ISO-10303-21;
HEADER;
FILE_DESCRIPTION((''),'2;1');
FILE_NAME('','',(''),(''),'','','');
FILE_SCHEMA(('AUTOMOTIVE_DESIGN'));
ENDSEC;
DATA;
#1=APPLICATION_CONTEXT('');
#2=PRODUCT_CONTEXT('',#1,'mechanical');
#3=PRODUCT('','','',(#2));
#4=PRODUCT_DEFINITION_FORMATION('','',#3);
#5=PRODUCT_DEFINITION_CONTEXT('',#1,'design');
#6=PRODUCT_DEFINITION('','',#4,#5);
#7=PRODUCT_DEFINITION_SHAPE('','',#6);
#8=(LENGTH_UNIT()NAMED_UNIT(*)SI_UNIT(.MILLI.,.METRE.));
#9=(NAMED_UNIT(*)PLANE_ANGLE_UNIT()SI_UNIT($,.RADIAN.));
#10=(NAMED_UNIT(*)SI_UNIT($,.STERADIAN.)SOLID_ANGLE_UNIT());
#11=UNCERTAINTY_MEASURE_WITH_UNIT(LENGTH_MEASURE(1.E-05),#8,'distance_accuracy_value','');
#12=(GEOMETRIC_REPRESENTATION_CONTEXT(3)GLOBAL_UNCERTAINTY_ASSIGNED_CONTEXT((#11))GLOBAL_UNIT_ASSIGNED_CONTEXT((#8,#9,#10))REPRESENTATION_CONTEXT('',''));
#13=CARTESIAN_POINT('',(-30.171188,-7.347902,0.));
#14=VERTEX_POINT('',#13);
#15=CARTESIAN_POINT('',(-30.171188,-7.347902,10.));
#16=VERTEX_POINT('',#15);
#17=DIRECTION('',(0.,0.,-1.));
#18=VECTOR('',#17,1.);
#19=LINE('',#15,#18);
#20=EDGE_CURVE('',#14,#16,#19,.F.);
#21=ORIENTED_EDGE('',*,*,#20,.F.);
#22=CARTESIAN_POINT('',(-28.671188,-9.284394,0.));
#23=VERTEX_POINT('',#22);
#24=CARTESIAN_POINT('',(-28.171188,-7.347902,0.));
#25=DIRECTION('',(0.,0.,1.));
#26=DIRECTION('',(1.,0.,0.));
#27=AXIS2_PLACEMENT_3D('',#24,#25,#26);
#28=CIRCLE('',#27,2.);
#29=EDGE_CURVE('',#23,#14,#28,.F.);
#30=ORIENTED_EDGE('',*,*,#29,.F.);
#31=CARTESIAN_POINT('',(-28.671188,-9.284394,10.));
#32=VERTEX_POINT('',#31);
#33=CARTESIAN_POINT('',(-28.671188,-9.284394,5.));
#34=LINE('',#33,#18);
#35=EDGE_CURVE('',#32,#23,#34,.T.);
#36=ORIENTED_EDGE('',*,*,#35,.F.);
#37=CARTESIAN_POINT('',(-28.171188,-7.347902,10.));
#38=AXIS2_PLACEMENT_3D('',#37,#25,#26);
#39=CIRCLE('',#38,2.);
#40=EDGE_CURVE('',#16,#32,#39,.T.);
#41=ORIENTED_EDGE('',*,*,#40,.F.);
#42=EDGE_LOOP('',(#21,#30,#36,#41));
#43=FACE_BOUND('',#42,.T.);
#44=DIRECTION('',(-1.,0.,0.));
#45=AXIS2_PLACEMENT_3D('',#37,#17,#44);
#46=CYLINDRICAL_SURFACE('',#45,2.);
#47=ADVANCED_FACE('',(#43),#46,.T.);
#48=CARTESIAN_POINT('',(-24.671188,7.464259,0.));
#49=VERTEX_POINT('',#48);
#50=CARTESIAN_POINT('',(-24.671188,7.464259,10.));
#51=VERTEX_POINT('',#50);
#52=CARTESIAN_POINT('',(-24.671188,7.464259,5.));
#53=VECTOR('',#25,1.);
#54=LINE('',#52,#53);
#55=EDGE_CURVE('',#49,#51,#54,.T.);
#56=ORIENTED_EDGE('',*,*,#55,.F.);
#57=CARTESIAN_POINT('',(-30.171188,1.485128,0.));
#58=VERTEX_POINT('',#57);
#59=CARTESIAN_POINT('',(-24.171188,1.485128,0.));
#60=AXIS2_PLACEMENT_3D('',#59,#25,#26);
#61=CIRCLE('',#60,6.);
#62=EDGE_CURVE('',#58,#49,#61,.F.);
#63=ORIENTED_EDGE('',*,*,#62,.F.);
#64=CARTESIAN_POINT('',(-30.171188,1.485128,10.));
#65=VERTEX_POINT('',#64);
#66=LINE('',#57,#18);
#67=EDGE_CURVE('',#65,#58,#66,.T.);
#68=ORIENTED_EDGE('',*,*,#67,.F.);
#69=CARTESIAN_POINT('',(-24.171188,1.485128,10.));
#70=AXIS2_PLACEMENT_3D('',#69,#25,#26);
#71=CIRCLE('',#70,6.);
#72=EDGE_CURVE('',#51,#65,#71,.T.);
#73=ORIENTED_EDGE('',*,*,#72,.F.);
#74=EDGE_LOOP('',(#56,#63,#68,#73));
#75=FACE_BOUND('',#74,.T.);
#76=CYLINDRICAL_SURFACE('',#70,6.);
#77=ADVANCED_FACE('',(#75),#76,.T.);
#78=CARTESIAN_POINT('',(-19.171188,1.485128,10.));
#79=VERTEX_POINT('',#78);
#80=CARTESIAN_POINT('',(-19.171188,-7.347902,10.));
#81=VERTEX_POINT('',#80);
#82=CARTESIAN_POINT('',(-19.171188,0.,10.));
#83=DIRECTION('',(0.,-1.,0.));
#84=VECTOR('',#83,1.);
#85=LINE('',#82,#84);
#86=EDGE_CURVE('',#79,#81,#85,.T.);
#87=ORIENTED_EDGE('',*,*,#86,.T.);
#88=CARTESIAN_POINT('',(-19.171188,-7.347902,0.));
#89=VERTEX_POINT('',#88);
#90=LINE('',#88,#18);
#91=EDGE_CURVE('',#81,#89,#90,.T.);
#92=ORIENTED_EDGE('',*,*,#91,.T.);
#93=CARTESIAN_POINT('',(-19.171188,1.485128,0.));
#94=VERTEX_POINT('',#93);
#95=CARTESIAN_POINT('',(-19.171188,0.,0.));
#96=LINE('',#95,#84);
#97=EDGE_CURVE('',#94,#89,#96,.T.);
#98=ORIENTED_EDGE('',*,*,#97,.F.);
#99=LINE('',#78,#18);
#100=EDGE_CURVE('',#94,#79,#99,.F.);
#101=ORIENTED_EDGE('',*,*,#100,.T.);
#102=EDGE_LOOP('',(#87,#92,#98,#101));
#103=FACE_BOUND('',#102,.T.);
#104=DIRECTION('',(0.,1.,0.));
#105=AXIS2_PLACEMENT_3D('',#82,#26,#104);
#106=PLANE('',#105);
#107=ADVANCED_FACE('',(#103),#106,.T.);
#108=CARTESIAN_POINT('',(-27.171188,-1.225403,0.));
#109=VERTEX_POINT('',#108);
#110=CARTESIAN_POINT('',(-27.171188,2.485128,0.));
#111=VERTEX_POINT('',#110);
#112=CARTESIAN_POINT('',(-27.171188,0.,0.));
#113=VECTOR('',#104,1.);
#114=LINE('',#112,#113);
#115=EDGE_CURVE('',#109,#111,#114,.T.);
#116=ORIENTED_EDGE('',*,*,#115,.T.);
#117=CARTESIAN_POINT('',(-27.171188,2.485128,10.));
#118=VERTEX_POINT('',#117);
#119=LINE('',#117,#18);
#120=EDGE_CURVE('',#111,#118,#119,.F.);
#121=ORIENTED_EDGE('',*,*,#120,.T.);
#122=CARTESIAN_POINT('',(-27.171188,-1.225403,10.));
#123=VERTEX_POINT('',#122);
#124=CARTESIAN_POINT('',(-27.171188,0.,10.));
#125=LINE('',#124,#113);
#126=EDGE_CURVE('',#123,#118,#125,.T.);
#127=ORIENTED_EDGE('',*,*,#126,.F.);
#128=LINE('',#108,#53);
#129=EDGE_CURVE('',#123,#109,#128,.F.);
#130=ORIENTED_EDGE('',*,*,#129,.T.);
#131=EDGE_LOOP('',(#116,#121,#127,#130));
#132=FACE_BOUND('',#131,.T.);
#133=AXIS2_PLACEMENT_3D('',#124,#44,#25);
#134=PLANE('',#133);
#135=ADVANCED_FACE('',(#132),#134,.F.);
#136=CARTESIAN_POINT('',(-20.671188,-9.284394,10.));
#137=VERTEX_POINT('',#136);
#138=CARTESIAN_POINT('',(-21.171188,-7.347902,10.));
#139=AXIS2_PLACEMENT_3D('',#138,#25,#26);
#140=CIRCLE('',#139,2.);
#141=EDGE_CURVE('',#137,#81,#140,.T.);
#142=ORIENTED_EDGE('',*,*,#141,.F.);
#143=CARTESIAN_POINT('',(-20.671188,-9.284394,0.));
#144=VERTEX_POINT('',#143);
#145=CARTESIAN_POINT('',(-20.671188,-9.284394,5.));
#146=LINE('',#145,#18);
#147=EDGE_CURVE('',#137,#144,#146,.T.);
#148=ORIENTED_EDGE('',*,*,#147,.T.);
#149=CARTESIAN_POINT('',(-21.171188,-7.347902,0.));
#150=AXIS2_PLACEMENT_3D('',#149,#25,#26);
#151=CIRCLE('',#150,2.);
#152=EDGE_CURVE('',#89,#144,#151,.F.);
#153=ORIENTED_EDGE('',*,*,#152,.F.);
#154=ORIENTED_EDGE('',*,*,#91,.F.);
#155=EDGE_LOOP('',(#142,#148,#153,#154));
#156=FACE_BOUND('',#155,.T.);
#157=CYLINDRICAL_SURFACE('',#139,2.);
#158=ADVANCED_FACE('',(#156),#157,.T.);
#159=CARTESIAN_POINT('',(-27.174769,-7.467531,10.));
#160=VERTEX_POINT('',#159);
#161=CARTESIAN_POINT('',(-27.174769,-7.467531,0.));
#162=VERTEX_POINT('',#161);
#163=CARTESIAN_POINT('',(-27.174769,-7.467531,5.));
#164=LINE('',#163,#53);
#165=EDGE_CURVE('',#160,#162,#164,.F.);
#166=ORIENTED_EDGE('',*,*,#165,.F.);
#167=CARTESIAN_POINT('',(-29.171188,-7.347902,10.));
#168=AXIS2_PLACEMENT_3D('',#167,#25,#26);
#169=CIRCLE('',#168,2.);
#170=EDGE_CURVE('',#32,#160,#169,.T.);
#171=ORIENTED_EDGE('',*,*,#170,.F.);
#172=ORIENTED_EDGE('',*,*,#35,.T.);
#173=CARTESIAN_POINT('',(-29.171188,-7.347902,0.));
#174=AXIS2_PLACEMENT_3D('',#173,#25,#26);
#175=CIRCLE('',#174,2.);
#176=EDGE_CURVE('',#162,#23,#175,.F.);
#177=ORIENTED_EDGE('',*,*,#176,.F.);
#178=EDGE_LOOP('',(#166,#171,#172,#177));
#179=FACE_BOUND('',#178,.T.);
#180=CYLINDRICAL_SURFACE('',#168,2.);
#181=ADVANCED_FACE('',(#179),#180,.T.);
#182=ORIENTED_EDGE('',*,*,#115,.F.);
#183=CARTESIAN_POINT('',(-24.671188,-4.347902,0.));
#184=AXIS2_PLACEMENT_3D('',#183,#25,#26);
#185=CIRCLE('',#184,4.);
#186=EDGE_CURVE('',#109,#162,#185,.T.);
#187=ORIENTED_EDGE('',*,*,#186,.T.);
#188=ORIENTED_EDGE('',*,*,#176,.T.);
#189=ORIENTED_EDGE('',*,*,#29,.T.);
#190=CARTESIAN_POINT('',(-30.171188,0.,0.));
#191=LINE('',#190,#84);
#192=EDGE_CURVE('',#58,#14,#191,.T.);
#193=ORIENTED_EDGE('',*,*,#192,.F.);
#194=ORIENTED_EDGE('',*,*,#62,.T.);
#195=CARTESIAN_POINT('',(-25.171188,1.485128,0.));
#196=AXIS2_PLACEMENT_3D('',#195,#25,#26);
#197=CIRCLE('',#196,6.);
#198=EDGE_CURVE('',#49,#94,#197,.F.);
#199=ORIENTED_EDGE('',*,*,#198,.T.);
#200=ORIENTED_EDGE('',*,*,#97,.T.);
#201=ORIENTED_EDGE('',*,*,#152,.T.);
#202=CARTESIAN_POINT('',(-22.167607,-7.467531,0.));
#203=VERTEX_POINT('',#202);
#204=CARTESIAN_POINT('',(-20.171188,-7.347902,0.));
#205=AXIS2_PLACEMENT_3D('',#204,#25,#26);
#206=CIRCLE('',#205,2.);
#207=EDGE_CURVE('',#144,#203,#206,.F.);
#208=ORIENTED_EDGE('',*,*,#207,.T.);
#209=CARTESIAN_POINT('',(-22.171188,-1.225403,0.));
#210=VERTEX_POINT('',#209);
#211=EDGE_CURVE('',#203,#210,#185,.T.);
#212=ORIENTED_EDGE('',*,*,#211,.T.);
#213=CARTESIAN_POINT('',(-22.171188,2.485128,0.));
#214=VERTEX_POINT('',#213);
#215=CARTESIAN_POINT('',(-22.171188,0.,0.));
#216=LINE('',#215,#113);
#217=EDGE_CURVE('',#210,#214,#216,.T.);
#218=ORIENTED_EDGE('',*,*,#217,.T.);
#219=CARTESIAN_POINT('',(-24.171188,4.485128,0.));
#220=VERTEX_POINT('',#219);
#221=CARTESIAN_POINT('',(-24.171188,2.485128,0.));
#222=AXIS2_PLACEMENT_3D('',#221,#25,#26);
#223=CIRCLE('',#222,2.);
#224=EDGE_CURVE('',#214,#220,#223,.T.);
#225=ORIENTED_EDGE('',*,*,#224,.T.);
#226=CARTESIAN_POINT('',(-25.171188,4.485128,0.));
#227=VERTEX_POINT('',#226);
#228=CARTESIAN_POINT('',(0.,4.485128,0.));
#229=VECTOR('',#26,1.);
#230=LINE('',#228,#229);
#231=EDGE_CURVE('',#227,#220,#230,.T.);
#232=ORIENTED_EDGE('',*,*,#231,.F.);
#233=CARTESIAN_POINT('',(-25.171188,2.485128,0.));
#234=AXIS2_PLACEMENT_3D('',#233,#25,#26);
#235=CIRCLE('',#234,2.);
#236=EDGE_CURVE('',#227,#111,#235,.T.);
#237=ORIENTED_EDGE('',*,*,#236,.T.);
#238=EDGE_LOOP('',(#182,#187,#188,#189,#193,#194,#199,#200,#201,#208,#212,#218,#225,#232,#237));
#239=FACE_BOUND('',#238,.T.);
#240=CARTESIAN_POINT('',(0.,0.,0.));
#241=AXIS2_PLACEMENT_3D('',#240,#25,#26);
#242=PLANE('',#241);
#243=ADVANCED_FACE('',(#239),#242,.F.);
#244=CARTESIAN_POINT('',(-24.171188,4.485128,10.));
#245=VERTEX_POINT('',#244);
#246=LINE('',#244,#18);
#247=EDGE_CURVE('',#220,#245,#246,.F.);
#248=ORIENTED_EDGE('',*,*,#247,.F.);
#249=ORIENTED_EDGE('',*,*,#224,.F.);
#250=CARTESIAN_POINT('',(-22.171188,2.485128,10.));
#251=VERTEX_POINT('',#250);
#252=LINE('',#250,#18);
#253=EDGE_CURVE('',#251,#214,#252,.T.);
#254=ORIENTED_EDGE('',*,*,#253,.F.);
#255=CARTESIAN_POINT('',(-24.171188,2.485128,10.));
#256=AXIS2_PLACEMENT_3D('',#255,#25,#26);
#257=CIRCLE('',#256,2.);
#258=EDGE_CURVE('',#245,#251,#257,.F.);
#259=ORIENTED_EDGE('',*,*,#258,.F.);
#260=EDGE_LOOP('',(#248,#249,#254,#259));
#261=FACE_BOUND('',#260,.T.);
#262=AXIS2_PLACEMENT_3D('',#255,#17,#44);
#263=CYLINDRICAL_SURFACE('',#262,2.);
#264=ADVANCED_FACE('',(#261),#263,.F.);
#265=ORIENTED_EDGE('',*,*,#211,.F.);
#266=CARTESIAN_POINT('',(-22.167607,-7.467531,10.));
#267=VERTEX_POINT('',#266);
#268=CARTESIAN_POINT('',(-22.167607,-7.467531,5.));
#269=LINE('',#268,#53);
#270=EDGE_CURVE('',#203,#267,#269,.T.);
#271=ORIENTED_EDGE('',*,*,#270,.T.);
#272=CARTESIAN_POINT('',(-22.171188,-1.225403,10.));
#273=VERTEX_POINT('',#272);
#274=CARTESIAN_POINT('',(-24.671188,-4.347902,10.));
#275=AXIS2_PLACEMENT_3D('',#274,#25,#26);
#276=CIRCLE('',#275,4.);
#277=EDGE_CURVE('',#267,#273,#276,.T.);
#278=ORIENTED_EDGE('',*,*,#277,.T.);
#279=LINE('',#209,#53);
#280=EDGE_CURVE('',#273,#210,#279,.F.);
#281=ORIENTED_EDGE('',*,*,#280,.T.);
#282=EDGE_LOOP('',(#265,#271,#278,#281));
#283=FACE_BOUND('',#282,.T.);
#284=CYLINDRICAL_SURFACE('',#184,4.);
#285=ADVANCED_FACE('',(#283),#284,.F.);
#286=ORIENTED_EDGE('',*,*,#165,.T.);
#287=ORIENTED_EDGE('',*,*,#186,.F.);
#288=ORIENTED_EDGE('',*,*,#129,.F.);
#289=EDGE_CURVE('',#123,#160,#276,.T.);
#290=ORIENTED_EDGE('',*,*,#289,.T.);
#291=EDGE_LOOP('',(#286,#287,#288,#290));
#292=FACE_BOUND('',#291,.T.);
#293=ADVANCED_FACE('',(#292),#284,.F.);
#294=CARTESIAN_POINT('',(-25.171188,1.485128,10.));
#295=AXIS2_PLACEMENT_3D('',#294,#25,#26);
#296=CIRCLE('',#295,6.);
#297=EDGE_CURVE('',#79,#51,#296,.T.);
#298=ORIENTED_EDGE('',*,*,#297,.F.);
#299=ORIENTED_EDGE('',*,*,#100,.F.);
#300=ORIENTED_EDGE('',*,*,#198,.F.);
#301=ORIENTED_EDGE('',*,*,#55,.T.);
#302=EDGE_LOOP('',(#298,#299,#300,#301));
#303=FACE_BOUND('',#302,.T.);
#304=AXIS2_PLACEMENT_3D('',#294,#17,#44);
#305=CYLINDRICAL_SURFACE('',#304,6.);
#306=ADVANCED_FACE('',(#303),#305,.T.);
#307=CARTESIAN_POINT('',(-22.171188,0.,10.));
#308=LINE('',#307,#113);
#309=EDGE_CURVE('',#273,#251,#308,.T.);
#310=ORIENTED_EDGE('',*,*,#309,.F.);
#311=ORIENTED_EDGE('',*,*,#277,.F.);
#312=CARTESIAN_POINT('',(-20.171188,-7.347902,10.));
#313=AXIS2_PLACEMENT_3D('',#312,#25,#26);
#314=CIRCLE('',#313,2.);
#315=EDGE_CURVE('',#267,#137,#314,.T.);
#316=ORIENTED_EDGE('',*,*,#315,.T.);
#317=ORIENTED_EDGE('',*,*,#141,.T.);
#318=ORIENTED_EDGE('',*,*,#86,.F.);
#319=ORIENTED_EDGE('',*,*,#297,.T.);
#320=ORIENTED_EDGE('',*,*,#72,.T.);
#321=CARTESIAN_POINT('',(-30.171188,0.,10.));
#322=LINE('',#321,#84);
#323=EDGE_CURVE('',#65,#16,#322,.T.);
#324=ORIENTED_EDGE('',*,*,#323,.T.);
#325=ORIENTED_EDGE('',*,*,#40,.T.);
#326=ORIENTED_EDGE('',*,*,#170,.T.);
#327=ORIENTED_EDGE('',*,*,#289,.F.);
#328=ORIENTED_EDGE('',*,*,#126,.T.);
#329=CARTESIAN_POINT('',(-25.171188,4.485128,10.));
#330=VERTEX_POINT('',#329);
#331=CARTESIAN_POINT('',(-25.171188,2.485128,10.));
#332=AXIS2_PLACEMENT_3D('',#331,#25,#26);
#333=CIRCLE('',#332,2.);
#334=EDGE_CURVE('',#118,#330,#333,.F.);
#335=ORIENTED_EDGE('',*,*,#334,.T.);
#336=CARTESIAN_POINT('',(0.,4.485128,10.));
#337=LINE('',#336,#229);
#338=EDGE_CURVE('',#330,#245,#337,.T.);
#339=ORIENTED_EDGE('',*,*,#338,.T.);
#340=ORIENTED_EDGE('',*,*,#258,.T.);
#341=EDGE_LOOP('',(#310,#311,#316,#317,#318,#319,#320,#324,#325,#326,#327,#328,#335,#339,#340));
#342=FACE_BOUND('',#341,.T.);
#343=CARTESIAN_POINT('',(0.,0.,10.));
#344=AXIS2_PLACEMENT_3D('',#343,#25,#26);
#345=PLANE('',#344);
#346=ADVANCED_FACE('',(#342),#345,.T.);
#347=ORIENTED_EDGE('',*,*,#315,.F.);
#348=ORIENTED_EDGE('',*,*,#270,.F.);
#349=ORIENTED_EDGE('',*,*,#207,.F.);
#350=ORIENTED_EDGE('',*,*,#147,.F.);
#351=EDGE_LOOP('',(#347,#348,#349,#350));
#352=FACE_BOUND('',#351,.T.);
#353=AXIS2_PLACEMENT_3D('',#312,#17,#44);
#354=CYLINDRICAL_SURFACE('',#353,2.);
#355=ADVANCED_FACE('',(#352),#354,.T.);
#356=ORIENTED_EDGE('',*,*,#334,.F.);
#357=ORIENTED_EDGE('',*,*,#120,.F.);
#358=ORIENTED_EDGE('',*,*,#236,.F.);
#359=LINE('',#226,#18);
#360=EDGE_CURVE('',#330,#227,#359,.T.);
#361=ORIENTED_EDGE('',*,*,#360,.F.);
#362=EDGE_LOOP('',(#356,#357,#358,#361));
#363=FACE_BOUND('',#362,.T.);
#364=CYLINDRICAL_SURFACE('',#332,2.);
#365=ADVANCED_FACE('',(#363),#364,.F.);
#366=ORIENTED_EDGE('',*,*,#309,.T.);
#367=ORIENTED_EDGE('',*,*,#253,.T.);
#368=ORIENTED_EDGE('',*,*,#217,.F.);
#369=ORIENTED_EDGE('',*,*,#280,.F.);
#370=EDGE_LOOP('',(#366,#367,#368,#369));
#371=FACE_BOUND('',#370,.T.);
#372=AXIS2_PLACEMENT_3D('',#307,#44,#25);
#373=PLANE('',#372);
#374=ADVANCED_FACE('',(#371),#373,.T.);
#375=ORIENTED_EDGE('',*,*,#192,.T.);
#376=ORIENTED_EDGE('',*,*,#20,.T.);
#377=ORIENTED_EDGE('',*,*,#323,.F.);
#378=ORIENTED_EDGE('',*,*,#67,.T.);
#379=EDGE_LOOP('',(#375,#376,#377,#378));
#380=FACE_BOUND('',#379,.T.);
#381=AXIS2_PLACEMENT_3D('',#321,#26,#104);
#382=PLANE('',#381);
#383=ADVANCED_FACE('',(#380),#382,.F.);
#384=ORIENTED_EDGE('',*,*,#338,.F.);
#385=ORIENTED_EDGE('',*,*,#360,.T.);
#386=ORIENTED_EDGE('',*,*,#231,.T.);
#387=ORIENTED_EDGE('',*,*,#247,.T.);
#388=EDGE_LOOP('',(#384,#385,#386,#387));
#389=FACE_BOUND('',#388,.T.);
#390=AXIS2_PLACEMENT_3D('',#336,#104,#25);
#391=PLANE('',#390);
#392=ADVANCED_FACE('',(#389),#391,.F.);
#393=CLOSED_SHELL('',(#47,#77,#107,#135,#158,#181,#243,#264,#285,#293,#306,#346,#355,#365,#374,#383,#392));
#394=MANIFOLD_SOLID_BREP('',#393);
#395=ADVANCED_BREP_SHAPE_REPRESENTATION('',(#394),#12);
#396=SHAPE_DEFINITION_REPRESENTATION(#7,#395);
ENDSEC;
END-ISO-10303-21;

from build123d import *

# Parameters (mm, degrees)
BOSS_EXTRUDE1_DEPTH = 10
FILLET1_R           = 6
FILLET2_R           = 2
FILLET3_R           = 2
SKETCH2_R           = 4
CUT_EXTRUDE1_DEPTH  = 34.113449774


with BuildPart() as part:
    # Sketch1 → Boss-Extrude1 (new body)
    with BuildSketch(Plane.XY):
        with BuildLine():
            Line((-27.171188048, -9.347902097), (-27.171188048, -6.180932375))
            ThreePointArc((-27.171188048, -6.180932375), (-27.771188048, -4.347902097), (-27.171188048, -2.514871819))
            Line((-27.171188048, -2.514871819), (-27.171188048, 4.485128181))
            Line((-27.171188048, 4.485128181), (-22.171188048, 4.485128181))
            Line((-22.171188048, 4.485128181), (-22.171188048, -2.514871819))
            ThreePointArc((-22.171188048, -2.514871819), (-21.725004076, -3.38353702), (-21.571188048, -4.347902097))
            ThreePointArc((-21.571188048, -4.347902097), (-21.725004076, -5.312267173), (-22.171188048, -6.180932375))
            Line((-22.171188048, -6.180932375), (-22.171188048, -9.347902097))
            Line((-22.171188048, -9.347902097), (-19.171188048, -9.347902097))
            Line((-19.171188048, -9.347902097), (-19.171188048, 7.485128181))
            Line((-19.171188048, 7.485128181), (-30.171188048, 7.485128181))
            Line((-30.171188048, 7.485128181), (-30.171188048, -9.347902097))
            Line((-30.171188048, -9.347902097), (-27.171188048, -9.347902097))
        make_face()
    extrude(amount=BOSS_EXTRUDE1_DEPTH)

    # Fillet1
    # the kernel refuses this fillet: 6 mm, written as the material it takes off along each edge
    with BuildSketch(Plane(origin=(-19.171188048, 7.485128181, -15), x_dir=(-1, 0, 0), z_dir=(0, 0, 1))) as fillet1_piece_1:
        with BuildLine():
            CenterArc((FILLET1_R, FILLET1_R), FILLET1_R, 180, 90)
            Line((0, FILLET1_R), (0, 0))
            Line((0, 0), (FILLET1_R, 0))
        make_face()
    extrude(amount=40, mode=Mode.SUBTRACT)
    with BuildSketch(Plane(origin=(-30.171188048, 7.485128181, -15), x_dir=(1, 0, 0), z_dir=(0, 0, 1))) as fillet1_piece_2:
        with BuildLine():
            CenterArc((FILLET1_R, -FILLET1_R), FILLET1_R, 90, 90)
            Line((0, -FILLET1_R), (0, 0))
            Line((0, 0), (FILLET1_R, 0))
        make_face()
    extrude(amount=40, mode=Mode.SUBTRACT)

    # Fillet2
    # the kernel refuses this fillet: 2 mm, written as the material it takes off along each edge
    with BuildSketch(Plane(origin=(-19.171188048, -9.347902097, -5), x_dir=(0, 1, 0), z_dir=(0, 0, 1)), Plane(origin=(-22.171188048, -9.347902097, -5), x_dir=(1, 0, 0), z_dir=(0, 0, 1)), Plane(origin=(-30.171188048, -9.347902097, -5), x_dir=(1, 0, 0), z_dir=(0, 0, 1))) as fillet2_piece_1:
        with BuildLine():
            CenterArc((FILLET2_R, FILLET2_R), FILLET2_R, 180, 90)
            Line((0, FILLET2_R), (0, 0))
            Line((0, 0), (FILLET2_R, 0))
        make_face()
    extrude(amount=20, mode=Mode.SUBTRACT)
    with BuildSketch(Plane(origin=(-27.171188048, -9.347902097, -5), x_dir=(-1, 0, 0), z_dir=(0, 0, 1))) as fillet2_piece_2:
        with BuildLine():
            CenterArc((FILLET2_R, -FILLET2_R), FILLET2_R, 90, 90)
            Line((0, -FILLET2_R), (0, 0))
            Line((0, 0), (FILLET2_R, 0))
        make_face()
    extrude(amount=20, mode=Mode.SUBTRACT)

    # Fillet3
    fillet3_edges = [part.edges().sort_by_distance(p)[0] for p in [
        (-22.171188048, 4.485128181, 5),
        (-27.171188048, 4.485128181, 5),
    ]]
    fillet(fillet3_edges, radius=FILLET3_R)

    # Sketch2 → Cut-Extrude1 (cut, through all)
    with BuildSketch(Plane.XY.offset(10)):
        with Locations((-24.671188048, -4.347902097)):
            Circle(SKETCH2_R)
    extrude(amount=-CUT_EXTRUDE1_DEPTH, mode=Mode.SUBTRACT)


solid = part.part
